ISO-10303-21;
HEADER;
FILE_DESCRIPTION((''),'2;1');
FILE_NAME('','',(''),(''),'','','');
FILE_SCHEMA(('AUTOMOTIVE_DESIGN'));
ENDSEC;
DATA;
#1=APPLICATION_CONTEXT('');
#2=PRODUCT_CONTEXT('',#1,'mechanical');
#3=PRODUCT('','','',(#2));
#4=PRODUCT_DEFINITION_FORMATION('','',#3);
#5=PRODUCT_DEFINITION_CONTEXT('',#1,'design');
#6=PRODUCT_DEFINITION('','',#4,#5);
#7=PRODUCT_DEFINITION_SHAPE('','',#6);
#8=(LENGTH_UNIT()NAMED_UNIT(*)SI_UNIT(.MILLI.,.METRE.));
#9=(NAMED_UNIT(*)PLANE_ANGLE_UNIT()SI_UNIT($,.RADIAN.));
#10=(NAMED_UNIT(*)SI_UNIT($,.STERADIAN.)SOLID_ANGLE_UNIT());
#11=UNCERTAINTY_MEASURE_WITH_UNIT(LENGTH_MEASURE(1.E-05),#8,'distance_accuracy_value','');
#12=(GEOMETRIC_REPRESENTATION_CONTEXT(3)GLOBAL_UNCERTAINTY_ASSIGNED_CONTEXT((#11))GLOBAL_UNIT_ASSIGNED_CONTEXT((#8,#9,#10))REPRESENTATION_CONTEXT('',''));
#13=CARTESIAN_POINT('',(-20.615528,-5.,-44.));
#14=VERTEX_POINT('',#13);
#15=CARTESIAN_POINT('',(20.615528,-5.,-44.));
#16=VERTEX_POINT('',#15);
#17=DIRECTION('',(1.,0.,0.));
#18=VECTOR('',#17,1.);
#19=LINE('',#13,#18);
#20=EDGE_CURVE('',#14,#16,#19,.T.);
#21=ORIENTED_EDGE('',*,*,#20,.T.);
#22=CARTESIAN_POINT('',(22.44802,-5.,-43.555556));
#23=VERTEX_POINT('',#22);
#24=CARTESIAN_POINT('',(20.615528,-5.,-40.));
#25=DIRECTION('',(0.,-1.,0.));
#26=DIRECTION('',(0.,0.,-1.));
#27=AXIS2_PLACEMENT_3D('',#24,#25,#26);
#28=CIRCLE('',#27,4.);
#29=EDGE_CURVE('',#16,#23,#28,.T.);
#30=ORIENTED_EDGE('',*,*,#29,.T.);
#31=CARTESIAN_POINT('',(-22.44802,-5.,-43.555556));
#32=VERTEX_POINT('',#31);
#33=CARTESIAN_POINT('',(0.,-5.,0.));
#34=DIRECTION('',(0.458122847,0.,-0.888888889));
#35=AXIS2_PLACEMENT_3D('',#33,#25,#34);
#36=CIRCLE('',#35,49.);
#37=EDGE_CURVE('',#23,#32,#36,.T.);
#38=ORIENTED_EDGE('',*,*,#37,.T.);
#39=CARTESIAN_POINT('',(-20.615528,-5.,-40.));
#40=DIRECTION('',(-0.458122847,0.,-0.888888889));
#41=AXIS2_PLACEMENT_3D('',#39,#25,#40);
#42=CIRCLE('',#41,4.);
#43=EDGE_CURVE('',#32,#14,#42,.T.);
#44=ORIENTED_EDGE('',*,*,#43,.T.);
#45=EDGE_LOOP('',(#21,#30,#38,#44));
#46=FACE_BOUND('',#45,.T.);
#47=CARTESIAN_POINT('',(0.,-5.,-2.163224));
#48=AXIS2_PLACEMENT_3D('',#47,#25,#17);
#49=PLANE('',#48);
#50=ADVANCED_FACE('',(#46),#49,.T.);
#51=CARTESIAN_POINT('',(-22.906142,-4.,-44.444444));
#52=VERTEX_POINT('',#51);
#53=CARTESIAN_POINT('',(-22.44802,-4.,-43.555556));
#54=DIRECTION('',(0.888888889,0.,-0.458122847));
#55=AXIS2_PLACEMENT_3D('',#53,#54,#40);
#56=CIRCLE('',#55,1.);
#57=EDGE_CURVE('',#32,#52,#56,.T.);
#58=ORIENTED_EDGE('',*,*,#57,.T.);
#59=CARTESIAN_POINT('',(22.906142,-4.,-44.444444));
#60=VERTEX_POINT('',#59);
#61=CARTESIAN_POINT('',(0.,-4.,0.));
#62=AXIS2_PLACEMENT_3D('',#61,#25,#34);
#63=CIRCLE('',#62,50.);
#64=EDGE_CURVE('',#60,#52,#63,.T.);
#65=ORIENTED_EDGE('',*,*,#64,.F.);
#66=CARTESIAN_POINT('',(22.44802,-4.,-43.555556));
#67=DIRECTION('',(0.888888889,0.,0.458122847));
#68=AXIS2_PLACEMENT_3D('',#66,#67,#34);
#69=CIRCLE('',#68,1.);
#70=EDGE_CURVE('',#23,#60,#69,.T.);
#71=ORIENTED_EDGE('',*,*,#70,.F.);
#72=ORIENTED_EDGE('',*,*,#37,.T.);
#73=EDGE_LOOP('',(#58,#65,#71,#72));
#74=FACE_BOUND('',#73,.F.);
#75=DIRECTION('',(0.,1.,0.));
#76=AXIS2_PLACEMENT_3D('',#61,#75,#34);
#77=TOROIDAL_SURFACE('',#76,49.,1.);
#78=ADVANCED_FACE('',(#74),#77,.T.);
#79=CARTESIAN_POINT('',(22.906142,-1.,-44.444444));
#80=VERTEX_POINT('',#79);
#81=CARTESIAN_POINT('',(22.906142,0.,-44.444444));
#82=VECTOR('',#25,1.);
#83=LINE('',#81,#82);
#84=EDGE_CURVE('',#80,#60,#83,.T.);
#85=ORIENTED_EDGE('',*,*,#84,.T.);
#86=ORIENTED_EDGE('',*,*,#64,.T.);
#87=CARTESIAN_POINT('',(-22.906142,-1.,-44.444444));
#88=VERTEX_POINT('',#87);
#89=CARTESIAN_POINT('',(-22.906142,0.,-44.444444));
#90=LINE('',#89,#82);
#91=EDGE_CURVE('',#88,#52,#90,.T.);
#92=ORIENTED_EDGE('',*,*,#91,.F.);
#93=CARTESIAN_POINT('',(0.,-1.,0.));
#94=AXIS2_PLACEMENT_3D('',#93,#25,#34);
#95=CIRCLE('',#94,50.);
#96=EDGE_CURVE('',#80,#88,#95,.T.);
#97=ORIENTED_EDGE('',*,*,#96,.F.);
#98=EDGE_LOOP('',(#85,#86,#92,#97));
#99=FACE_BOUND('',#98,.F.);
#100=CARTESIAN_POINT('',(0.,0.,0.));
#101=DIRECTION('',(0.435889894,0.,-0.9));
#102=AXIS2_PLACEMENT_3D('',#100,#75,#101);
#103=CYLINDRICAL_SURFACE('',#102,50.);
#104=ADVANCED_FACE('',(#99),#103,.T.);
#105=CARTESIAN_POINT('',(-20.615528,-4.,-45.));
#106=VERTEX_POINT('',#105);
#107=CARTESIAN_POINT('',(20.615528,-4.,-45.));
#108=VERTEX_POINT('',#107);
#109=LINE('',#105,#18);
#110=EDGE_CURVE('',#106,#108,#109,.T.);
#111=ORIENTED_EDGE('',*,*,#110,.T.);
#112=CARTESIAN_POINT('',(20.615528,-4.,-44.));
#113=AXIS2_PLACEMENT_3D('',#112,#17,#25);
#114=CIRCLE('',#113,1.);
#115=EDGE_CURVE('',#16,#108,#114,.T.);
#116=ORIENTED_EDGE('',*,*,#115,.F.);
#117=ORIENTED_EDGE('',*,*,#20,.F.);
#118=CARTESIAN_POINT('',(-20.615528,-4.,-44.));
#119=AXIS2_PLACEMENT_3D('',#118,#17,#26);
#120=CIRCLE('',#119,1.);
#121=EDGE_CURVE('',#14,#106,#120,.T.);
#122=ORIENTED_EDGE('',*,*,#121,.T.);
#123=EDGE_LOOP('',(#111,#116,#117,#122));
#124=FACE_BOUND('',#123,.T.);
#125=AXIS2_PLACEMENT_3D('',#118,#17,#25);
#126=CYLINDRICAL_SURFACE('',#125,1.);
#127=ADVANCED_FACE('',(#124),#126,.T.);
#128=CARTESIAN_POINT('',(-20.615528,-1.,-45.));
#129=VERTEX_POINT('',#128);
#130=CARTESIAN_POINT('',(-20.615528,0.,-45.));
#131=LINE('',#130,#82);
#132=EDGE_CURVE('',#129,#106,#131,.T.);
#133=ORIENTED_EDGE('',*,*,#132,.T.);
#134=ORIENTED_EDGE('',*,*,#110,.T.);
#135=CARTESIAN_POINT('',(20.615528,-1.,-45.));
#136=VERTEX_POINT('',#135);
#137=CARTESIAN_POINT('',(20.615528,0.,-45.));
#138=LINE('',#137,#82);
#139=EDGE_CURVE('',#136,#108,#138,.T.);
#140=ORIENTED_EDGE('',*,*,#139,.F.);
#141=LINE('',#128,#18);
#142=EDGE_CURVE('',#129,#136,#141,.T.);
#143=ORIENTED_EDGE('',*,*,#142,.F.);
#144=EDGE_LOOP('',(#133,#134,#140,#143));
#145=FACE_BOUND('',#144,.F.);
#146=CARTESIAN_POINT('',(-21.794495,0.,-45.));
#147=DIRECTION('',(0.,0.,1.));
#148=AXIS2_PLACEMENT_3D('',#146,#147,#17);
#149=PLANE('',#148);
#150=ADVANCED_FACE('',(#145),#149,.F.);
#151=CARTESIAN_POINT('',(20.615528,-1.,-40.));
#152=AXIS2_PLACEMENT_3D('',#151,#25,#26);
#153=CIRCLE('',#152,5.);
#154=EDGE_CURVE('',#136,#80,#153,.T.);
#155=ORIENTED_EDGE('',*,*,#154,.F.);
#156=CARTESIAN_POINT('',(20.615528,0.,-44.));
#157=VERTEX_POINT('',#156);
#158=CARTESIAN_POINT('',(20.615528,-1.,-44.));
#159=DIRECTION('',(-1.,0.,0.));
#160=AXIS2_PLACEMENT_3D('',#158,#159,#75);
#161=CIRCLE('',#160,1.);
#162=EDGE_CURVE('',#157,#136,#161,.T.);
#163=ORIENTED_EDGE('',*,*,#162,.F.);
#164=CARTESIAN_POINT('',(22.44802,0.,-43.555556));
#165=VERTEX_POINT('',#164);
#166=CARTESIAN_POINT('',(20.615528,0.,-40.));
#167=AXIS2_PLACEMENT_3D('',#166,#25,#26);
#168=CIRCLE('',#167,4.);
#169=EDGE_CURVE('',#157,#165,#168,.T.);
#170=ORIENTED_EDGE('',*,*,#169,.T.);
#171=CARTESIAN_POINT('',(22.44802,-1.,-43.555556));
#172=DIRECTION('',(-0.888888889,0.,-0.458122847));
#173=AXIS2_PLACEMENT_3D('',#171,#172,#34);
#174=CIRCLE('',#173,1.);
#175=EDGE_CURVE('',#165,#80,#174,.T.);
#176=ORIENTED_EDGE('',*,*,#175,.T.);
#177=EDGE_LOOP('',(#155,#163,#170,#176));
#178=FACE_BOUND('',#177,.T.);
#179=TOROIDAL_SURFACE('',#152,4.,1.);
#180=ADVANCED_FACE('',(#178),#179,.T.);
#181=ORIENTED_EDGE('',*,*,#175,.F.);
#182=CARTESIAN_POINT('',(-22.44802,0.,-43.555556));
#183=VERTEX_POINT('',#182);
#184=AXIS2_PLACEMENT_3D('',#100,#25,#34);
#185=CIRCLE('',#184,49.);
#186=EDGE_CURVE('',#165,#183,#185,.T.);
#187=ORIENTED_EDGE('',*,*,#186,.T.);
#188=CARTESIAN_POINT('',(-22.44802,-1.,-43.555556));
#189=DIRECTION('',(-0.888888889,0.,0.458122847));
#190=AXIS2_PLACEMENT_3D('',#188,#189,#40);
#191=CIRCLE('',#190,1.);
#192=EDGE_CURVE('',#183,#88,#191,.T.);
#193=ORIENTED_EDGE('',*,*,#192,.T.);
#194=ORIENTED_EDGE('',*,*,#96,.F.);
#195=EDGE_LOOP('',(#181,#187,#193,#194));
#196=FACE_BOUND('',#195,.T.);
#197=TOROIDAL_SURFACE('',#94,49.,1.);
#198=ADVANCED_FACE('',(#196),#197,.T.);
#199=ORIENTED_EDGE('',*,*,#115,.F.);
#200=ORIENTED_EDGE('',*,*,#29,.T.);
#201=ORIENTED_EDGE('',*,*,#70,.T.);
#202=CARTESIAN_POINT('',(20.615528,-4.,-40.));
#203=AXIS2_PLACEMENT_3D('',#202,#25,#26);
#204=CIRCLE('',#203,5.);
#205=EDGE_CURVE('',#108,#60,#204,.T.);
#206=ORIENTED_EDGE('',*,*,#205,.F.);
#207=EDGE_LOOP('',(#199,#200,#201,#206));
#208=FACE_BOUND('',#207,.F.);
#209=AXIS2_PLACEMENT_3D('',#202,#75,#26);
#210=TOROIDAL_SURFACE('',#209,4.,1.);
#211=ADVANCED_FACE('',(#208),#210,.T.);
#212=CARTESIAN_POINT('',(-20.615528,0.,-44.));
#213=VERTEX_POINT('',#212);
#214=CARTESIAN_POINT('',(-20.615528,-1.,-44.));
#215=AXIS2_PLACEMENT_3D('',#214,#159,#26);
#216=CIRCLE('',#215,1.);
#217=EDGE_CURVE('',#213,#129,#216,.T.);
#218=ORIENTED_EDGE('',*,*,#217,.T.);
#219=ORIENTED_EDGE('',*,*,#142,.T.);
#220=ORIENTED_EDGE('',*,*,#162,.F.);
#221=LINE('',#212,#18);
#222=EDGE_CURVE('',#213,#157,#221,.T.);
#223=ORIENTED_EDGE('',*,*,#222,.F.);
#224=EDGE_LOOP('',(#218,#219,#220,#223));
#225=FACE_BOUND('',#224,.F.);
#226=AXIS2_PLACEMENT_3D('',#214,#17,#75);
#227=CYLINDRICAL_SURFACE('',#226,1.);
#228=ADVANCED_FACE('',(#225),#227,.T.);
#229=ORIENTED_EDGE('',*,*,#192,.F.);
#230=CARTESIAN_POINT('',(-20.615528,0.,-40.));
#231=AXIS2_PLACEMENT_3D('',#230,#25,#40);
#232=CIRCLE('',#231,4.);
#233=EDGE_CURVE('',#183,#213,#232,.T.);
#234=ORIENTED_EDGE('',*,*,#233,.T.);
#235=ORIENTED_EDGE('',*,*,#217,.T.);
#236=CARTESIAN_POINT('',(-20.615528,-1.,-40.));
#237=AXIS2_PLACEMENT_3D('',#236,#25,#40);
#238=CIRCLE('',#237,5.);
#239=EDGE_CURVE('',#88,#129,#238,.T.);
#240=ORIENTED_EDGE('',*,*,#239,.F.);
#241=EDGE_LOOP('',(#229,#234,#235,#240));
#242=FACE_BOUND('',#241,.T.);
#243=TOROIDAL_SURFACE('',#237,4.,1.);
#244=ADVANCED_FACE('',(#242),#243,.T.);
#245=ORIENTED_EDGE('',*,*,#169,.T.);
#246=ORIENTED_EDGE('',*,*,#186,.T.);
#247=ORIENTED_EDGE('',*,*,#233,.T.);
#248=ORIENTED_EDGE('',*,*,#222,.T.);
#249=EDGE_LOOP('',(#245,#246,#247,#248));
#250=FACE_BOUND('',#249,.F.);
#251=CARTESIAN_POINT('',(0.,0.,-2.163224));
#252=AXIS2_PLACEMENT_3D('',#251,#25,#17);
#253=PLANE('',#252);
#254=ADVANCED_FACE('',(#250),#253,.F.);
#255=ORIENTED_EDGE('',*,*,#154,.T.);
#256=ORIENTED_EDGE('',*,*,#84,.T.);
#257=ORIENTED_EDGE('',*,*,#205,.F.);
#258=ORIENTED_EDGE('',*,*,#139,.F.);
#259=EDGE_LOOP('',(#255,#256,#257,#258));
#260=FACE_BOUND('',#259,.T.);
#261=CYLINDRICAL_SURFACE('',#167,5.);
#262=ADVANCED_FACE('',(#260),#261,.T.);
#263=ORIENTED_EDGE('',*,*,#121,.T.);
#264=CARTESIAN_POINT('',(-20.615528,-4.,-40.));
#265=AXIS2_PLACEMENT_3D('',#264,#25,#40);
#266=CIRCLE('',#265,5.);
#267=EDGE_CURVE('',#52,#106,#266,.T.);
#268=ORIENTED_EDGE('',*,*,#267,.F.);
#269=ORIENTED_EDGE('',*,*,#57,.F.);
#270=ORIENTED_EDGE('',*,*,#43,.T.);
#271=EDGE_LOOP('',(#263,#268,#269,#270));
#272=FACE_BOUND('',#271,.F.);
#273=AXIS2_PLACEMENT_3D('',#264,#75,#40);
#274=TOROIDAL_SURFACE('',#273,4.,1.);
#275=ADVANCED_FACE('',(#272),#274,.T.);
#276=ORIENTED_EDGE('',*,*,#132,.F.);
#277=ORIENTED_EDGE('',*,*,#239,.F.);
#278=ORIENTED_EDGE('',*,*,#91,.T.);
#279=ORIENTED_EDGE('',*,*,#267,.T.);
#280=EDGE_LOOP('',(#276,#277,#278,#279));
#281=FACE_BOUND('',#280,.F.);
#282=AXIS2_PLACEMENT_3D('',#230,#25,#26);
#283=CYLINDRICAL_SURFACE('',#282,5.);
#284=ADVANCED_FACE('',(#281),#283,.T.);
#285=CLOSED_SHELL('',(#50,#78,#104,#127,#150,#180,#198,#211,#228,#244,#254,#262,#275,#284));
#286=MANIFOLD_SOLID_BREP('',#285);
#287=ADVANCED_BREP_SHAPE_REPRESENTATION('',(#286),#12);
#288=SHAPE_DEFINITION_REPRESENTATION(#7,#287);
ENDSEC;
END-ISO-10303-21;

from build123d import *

# Parameters (mm, degrees)
F1_DEPTH = 5
F2_R     = 5
F3_R     = 1


with BuildPart() as f1:
    # F0 (on Front) → F1 (new body)
    with BuildSketch(Plane.XZ):
        with BuildLine():
            Line((-21.7944947177, -45), (21.7944947177, -45))
            ThreePointArc((21.7944947177, -45), (0, 50), (-21.7944947177, -45))
        make_face()
    extrude(amount=F1_DEPTH)

    # F2
    f2_edges = [f1.edges().sort_by_distance(p)[0] for p in [
        (21.794495, -2.5, -45),
        (-21.794495, -2.5, -45),
    ]]
    fillet(f2_edges, radius=F2_R)

    # F3
    f3_edges = [f1.edges().sort_by_distance(p)[0] for p in [
        (0, -5, 50),
        (0, 0, 50),
        (0, -5, -45),
        (0, 0, -45),
        (-21.794039, 0, -44.859127),
        (21.794039, 0, -44.859127),
        (-21.794039, -5, -44.859127),
        (21.794039, -5, -44.859127),
    ]]
    fillet(f3_edges, radius=F3_R)


solid = f1.part
